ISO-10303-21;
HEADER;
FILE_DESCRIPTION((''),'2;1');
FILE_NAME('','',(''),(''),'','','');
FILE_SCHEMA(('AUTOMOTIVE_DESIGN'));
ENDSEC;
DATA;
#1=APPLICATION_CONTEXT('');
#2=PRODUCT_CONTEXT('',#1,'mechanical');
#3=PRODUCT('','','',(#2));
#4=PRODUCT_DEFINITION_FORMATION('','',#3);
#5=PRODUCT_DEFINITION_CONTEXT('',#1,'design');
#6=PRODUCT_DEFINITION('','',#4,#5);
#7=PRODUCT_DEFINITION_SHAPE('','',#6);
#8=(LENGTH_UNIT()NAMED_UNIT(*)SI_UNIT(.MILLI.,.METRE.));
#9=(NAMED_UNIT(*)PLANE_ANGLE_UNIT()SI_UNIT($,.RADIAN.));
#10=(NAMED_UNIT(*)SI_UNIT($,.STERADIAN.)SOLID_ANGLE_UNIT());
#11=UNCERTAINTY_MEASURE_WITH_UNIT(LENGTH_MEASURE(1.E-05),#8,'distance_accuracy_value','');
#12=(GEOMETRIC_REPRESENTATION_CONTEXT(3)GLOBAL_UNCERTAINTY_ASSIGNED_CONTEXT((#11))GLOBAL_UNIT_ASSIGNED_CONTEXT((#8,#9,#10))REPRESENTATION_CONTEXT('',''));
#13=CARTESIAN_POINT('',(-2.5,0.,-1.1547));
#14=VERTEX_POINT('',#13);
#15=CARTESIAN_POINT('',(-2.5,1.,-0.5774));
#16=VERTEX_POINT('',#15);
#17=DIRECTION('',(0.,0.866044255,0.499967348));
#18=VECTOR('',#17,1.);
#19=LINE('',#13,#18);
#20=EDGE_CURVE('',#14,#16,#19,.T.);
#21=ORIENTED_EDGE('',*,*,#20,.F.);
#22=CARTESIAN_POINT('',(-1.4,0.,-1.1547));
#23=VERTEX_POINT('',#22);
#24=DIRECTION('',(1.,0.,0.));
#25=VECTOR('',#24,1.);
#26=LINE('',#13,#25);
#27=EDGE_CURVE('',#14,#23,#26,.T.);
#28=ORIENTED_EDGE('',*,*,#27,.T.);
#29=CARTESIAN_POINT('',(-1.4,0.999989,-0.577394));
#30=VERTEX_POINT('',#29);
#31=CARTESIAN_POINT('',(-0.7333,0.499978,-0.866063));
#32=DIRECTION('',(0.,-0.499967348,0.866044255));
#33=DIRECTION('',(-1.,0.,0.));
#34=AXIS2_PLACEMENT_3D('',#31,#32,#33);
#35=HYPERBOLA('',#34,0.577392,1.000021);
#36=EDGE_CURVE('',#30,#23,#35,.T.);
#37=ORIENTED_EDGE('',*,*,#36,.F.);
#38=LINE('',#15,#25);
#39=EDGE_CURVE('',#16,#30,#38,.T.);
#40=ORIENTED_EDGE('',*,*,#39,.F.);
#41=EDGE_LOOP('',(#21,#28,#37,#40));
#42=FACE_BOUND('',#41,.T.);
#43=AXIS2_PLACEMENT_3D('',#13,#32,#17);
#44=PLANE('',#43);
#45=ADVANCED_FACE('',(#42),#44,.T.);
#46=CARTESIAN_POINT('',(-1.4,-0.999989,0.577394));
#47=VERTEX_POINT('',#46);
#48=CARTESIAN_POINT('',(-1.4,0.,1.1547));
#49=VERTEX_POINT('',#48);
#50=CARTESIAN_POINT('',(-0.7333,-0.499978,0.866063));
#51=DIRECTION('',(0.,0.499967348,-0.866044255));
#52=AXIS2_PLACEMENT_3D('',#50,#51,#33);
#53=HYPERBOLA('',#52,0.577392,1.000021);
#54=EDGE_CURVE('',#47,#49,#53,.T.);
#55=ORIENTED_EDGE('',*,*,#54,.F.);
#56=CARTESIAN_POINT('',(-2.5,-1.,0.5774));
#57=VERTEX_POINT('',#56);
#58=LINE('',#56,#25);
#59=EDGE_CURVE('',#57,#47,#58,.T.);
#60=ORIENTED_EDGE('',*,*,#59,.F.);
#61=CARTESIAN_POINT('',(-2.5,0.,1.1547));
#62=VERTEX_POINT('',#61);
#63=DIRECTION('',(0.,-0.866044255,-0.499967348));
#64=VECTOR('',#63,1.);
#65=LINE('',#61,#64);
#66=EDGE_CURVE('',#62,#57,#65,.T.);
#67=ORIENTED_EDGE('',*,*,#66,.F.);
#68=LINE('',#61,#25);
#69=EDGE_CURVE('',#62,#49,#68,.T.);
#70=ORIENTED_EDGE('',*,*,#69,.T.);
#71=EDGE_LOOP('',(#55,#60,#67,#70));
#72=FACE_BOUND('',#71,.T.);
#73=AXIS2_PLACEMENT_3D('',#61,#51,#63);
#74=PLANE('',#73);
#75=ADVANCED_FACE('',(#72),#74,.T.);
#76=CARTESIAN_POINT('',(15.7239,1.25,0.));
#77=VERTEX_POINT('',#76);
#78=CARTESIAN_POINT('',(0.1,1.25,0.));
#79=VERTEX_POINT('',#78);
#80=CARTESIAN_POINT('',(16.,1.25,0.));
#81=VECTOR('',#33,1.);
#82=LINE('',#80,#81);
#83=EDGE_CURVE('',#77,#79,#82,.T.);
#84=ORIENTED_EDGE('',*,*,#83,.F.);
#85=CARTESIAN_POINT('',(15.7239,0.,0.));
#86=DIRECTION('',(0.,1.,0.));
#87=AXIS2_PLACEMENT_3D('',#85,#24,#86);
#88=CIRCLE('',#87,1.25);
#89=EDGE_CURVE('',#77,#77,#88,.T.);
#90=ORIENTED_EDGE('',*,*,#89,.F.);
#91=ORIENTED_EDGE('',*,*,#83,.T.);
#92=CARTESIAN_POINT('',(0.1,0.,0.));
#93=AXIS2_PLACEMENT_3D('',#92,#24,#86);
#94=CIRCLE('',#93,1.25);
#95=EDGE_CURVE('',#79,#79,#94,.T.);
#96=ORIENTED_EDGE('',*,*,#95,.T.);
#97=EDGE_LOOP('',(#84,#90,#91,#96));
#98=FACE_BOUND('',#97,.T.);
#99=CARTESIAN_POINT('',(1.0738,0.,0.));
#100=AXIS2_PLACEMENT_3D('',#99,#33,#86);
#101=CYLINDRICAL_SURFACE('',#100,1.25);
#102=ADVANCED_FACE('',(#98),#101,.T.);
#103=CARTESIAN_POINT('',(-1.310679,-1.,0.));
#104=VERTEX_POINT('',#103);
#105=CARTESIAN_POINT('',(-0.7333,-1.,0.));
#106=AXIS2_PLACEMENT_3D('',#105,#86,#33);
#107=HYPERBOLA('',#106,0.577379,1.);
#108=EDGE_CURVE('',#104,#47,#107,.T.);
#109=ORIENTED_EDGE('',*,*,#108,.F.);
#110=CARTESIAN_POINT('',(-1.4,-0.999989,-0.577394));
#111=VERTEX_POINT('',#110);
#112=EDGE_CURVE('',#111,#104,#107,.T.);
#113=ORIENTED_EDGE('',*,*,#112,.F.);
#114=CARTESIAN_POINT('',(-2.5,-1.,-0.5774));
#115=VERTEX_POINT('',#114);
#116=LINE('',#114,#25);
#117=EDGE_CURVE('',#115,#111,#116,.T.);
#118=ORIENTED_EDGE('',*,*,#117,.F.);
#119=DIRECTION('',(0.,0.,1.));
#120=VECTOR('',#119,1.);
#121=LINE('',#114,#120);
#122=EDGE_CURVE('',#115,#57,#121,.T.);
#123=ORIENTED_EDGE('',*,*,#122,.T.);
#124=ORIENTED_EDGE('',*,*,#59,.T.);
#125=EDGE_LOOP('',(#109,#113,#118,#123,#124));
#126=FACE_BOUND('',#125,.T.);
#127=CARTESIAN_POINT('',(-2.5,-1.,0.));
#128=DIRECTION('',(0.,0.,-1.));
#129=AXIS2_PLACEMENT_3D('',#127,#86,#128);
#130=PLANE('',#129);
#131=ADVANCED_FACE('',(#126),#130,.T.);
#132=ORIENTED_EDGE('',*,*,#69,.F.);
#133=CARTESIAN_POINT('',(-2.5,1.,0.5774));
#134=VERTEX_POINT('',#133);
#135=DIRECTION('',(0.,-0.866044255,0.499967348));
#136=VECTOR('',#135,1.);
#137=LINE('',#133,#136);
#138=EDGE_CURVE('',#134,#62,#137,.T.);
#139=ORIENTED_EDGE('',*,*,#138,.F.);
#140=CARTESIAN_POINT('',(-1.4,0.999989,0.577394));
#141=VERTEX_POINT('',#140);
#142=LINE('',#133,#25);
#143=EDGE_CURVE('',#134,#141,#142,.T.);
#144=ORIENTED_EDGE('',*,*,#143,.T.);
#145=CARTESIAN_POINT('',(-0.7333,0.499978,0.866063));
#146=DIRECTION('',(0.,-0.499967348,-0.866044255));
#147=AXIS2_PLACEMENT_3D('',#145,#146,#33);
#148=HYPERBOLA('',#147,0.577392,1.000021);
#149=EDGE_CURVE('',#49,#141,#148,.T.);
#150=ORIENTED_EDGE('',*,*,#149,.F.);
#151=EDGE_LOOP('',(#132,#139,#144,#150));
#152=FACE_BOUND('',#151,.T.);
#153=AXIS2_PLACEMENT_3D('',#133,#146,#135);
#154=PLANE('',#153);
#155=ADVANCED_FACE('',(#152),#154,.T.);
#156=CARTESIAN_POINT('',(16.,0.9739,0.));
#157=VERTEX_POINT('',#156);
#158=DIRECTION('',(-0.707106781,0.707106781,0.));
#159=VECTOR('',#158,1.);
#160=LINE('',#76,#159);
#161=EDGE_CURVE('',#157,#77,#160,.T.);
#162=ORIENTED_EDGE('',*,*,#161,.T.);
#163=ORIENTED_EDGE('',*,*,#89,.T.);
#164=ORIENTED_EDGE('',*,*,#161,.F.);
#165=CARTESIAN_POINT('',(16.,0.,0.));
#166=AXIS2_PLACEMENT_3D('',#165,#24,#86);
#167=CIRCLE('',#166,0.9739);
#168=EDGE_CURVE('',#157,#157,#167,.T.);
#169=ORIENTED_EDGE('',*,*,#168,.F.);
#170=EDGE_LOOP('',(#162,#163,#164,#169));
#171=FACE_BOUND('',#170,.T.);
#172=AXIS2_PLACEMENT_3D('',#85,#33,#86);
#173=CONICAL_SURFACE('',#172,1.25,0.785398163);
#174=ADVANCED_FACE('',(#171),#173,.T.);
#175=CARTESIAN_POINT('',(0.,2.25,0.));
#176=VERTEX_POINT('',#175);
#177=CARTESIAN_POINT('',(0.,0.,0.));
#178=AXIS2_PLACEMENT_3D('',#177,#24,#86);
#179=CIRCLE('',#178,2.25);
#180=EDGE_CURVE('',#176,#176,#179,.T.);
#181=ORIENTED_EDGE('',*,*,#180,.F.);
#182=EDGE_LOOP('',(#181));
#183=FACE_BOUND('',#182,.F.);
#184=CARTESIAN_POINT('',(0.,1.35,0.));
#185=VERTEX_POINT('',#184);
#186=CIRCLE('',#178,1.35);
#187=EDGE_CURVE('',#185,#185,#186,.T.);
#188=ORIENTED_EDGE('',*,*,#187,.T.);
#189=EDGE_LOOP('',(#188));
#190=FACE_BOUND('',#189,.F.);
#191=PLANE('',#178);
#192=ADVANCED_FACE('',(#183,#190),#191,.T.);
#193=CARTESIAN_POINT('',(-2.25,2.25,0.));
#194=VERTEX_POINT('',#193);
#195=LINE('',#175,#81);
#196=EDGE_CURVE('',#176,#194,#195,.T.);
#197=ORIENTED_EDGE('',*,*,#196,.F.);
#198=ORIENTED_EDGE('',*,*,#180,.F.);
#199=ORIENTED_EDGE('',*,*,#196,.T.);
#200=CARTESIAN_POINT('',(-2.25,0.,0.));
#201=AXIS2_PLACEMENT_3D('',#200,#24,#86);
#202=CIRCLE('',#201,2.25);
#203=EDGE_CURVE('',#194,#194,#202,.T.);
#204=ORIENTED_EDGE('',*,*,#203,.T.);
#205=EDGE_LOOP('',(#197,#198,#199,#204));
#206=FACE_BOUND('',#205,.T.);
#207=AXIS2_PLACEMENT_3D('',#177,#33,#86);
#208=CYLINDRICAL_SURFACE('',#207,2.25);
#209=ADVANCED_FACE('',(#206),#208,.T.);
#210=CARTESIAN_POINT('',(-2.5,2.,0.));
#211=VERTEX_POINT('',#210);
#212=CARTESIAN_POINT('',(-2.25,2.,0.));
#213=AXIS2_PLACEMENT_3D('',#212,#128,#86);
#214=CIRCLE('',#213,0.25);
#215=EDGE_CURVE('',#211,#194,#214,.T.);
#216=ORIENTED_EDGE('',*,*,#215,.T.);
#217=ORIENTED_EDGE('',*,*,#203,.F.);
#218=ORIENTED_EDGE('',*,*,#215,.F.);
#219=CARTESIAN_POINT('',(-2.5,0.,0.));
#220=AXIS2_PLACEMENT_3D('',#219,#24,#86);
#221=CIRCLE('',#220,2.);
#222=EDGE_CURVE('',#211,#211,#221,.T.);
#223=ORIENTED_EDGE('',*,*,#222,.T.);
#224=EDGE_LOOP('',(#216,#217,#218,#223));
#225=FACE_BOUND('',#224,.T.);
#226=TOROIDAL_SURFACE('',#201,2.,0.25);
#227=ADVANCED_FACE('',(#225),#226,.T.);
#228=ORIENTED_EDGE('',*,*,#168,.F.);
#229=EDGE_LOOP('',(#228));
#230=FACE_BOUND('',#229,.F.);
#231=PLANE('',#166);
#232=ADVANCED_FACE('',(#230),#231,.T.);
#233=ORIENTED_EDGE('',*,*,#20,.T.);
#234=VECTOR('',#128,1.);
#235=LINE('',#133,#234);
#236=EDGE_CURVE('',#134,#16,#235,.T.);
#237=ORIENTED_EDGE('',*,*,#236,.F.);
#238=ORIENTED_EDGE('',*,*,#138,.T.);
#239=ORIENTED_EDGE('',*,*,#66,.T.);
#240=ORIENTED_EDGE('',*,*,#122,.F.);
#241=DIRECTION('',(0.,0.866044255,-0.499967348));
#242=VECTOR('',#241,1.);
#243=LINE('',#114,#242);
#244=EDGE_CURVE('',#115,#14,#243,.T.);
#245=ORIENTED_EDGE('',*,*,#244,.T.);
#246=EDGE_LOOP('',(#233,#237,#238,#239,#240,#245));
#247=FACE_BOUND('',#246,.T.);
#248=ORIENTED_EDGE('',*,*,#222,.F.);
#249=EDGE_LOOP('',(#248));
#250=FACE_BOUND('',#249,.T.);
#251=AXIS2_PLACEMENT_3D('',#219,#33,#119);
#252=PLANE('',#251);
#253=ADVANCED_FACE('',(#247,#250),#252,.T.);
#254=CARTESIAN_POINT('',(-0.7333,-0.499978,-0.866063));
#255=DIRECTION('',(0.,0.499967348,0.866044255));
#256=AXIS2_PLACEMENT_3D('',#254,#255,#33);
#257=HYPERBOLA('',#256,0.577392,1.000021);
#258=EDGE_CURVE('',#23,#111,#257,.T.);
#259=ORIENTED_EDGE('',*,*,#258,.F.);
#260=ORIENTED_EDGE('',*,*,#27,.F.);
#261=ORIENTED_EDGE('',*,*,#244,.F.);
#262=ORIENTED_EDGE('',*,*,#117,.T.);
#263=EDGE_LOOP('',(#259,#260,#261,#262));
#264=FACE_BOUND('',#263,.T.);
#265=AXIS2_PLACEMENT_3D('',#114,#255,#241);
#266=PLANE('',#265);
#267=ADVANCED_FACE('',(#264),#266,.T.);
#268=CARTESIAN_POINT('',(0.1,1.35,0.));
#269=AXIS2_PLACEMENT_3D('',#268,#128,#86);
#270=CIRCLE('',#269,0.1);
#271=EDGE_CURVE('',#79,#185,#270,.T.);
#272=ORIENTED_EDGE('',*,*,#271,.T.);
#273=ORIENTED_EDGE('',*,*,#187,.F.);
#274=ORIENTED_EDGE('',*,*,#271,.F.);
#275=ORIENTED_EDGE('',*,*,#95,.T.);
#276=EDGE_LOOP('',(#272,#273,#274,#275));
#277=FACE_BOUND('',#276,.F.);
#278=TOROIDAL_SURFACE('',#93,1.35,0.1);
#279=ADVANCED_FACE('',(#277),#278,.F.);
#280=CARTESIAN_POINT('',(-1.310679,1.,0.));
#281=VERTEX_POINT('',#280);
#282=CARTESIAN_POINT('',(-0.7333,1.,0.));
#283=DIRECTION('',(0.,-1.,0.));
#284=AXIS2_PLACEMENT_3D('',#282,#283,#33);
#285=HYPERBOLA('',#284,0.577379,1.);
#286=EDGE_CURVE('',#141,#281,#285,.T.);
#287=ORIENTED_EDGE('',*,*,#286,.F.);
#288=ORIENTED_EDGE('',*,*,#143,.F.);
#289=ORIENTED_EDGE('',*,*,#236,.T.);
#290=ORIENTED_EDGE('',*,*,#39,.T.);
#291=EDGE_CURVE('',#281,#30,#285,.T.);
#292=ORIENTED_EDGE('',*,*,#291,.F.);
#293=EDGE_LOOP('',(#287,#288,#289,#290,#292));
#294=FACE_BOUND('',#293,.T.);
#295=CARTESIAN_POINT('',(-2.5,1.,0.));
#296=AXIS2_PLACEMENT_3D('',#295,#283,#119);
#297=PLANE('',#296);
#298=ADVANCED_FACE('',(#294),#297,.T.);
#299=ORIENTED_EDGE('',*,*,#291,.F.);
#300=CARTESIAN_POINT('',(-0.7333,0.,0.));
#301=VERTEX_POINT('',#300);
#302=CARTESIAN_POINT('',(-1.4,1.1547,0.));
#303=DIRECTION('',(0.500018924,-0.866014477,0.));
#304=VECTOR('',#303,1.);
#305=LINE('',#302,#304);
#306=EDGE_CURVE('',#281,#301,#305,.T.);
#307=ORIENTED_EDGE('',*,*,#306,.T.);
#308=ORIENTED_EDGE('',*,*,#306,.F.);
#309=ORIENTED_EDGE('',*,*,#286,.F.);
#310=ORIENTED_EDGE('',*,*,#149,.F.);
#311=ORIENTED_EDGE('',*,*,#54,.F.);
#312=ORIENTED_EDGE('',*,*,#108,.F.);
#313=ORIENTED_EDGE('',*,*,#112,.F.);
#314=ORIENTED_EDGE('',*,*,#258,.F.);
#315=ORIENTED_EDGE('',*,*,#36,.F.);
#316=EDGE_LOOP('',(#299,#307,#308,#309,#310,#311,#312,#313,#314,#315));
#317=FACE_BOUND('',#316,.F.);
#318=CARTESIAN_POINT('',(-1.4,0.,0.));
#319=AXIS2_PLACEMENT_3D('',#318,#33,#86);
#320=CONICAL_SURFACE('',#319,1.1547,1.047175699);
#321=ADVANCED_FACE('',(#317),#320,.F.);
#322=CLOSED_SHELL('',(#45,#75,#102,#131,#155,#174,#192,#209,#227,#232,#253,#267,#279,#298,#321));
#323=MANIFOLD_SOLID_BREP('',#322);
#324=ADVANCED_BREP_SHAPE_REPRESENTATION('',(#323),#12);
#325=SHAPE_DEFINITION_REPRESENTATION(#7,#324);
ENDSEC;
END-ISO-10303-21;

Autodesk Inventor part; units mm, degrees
ref_plane "YZ Plane" through (0, 0, 0) normal (1, 0, 0) x (0, 1, 0)
ref_plane "XZ Plane" through (0, 0, 0) normal (0, 1, 0) x (-1, 0, 0)
sketch "スケッチ1" plane through (0, 0, 0) normal (0, 0, 1) x (1, 0, 0)
  line L0 (-0.7333, 0) -> (16, 0)
  line L1 (16, 0) -> (16, 1.25)
  line L2 (16, 1.25) -> (1.35, 1.25)
  line L3 (1.35, 1.25) -> (1.0738, 1.25)
  line L4 (1.0738, 1.25) -> (0, 1.25)
  line L5 (0, 1.25) -> (0, 2.25)
  line L6 (0, 2.25) -> (-2.5, 2.25)
  line L7 (-2.5, 2.25) -> (-2.5, 1.1547)
  line L8 (-2.5, 1.1547) -> (-1.4, 1.1547)
  line L9 (-1.4, 1.1547) -> (-0.7333, 0)
  line L10 (-6.2, 0) -> (19.7, 0) projected
  line L11 (0, -0.45) -> (0, 2.7) projected
  line L12 (1.35, 1.25) -> (0, 1.25) construction
  dimension "d1" = 14.65
  dimension "d2" = 0.2762
  dimension "d3" = 2.5
  dimension "d4" = 1.1
  dimension "d5" = 60
  dimension "d6" = 2.5
  dimension "d7" = 2.5
  dimension "d8" = 2.3094
  dimension "d9" = 4.5
  dimension "d26" = 16
revolve "ボディ" add sketch "スケッチ1" angle 360 about axis through (-0.7333, 0, 0) along (1, 0, 0)
sketch "スケッチ2" plane through (-2.5, 0, 0) normal (-1, 0, 0) x (0, 0, 1)
  circle A0 centre (0, 0) radius 1.1547 projected
  line L0 (0, -3.15) -> (0, 3.15) projected
  line L1 (-3.15, 0) -> (3.15, 0) projected
  line L2 (1.1547, 0) -> (0.5774, -1)
  line L3 (0.5774, -1) -> (-0.5774, -1)
  line L4 (-0.5774, -1) -> (-1.1547, 0)
  line L5 (-1.1547, 0) -> (-0.5774, 1)
  line L6 (-0.5774, 1) -> (0.5774, 1)
  line L7 (0.5774, 1) -> (1.1547, 0)
extrude "長穴" add sketch "スケッチ2" against normal up to next contours L7 A0 | A0 L2 | L6 L0 A0 | A0 L0 L3 | L0 L6 A0 | A0 L3 L0 | L4 A0 | A0 L5
fillet "フィレット1" radius 0.25 1 edges at (-2.5, -2.25, 0)
thread "ねじ" size "M2.5x0.45" class "6g" standard "ISO Metric profile" length 14.65
chamfer "面取り1" distance 0.2761 distance2 0.2761 1 edges at (16, -1.25, 0) measured on face at (16, -0.3871, -0.3429)
ref_plane "Work Plane1" through (29, 0, 0) normal (0, -1, 0) x (1, 0, 0)
fillet "Fillet2" radius 0.1 1 edges at (0, -1.25, 0)
equation "\"d30\" = R"
equation "\"d17\" = RR"
equation "\"d13\" = GEL"
equation "\"d15\" = -0.5 * SPD + 0.5 * GD"
equation "\"d16\" = GUL"
equation "\"d1\" = GEL"
equation "\"d3\" = KOH"
equation "\"d4\" = INTI"
equation "\"d6\" = GD"
equation "\"d7\" = BDM"
equation "\"d8\" = 1.1547 * SW"
equation "\"d9\" = KOD"
equation "\"d26\" = NLG"
equation "\"GD\" = NND"
equation "\"NLG\" = 16"
equation "\"GEL\" = 14.65"
equation "\"KOD\" = 4.5"
equation "\"KOH\" = 2.5"
equation "\"INTI\" = 1.1"
equation "\"GAL\" = 0.61345 * PTC"
equation "\"GUL\" = 0.61345 * PTC"
equation "\"BDM\" = NND"
equation "\"SW\" = 2"
equation "\"RR\" = 0.25"
equation "\"SPD\" = NND - 1.2269 * PTC"
equation "\"R\" = 0.1"
equation "\"PHH\" = 0.1"
equation "\"GD1\" = THREADDIA - 1.2269 * PTC"
equation "\"THREADDIA\" = 2.5"
equation "\"FAWI\" = 45deg"
equation "\"PTC\" = 0.45"
equation "\"NND\" = 2.5"
equation "\"TOA\" = 30deg"
equation "\"E0\" = 1.155 * SW"
properties part number "JIS B 1176 - M2.5 x 16" material "鋼、軟鋼"
